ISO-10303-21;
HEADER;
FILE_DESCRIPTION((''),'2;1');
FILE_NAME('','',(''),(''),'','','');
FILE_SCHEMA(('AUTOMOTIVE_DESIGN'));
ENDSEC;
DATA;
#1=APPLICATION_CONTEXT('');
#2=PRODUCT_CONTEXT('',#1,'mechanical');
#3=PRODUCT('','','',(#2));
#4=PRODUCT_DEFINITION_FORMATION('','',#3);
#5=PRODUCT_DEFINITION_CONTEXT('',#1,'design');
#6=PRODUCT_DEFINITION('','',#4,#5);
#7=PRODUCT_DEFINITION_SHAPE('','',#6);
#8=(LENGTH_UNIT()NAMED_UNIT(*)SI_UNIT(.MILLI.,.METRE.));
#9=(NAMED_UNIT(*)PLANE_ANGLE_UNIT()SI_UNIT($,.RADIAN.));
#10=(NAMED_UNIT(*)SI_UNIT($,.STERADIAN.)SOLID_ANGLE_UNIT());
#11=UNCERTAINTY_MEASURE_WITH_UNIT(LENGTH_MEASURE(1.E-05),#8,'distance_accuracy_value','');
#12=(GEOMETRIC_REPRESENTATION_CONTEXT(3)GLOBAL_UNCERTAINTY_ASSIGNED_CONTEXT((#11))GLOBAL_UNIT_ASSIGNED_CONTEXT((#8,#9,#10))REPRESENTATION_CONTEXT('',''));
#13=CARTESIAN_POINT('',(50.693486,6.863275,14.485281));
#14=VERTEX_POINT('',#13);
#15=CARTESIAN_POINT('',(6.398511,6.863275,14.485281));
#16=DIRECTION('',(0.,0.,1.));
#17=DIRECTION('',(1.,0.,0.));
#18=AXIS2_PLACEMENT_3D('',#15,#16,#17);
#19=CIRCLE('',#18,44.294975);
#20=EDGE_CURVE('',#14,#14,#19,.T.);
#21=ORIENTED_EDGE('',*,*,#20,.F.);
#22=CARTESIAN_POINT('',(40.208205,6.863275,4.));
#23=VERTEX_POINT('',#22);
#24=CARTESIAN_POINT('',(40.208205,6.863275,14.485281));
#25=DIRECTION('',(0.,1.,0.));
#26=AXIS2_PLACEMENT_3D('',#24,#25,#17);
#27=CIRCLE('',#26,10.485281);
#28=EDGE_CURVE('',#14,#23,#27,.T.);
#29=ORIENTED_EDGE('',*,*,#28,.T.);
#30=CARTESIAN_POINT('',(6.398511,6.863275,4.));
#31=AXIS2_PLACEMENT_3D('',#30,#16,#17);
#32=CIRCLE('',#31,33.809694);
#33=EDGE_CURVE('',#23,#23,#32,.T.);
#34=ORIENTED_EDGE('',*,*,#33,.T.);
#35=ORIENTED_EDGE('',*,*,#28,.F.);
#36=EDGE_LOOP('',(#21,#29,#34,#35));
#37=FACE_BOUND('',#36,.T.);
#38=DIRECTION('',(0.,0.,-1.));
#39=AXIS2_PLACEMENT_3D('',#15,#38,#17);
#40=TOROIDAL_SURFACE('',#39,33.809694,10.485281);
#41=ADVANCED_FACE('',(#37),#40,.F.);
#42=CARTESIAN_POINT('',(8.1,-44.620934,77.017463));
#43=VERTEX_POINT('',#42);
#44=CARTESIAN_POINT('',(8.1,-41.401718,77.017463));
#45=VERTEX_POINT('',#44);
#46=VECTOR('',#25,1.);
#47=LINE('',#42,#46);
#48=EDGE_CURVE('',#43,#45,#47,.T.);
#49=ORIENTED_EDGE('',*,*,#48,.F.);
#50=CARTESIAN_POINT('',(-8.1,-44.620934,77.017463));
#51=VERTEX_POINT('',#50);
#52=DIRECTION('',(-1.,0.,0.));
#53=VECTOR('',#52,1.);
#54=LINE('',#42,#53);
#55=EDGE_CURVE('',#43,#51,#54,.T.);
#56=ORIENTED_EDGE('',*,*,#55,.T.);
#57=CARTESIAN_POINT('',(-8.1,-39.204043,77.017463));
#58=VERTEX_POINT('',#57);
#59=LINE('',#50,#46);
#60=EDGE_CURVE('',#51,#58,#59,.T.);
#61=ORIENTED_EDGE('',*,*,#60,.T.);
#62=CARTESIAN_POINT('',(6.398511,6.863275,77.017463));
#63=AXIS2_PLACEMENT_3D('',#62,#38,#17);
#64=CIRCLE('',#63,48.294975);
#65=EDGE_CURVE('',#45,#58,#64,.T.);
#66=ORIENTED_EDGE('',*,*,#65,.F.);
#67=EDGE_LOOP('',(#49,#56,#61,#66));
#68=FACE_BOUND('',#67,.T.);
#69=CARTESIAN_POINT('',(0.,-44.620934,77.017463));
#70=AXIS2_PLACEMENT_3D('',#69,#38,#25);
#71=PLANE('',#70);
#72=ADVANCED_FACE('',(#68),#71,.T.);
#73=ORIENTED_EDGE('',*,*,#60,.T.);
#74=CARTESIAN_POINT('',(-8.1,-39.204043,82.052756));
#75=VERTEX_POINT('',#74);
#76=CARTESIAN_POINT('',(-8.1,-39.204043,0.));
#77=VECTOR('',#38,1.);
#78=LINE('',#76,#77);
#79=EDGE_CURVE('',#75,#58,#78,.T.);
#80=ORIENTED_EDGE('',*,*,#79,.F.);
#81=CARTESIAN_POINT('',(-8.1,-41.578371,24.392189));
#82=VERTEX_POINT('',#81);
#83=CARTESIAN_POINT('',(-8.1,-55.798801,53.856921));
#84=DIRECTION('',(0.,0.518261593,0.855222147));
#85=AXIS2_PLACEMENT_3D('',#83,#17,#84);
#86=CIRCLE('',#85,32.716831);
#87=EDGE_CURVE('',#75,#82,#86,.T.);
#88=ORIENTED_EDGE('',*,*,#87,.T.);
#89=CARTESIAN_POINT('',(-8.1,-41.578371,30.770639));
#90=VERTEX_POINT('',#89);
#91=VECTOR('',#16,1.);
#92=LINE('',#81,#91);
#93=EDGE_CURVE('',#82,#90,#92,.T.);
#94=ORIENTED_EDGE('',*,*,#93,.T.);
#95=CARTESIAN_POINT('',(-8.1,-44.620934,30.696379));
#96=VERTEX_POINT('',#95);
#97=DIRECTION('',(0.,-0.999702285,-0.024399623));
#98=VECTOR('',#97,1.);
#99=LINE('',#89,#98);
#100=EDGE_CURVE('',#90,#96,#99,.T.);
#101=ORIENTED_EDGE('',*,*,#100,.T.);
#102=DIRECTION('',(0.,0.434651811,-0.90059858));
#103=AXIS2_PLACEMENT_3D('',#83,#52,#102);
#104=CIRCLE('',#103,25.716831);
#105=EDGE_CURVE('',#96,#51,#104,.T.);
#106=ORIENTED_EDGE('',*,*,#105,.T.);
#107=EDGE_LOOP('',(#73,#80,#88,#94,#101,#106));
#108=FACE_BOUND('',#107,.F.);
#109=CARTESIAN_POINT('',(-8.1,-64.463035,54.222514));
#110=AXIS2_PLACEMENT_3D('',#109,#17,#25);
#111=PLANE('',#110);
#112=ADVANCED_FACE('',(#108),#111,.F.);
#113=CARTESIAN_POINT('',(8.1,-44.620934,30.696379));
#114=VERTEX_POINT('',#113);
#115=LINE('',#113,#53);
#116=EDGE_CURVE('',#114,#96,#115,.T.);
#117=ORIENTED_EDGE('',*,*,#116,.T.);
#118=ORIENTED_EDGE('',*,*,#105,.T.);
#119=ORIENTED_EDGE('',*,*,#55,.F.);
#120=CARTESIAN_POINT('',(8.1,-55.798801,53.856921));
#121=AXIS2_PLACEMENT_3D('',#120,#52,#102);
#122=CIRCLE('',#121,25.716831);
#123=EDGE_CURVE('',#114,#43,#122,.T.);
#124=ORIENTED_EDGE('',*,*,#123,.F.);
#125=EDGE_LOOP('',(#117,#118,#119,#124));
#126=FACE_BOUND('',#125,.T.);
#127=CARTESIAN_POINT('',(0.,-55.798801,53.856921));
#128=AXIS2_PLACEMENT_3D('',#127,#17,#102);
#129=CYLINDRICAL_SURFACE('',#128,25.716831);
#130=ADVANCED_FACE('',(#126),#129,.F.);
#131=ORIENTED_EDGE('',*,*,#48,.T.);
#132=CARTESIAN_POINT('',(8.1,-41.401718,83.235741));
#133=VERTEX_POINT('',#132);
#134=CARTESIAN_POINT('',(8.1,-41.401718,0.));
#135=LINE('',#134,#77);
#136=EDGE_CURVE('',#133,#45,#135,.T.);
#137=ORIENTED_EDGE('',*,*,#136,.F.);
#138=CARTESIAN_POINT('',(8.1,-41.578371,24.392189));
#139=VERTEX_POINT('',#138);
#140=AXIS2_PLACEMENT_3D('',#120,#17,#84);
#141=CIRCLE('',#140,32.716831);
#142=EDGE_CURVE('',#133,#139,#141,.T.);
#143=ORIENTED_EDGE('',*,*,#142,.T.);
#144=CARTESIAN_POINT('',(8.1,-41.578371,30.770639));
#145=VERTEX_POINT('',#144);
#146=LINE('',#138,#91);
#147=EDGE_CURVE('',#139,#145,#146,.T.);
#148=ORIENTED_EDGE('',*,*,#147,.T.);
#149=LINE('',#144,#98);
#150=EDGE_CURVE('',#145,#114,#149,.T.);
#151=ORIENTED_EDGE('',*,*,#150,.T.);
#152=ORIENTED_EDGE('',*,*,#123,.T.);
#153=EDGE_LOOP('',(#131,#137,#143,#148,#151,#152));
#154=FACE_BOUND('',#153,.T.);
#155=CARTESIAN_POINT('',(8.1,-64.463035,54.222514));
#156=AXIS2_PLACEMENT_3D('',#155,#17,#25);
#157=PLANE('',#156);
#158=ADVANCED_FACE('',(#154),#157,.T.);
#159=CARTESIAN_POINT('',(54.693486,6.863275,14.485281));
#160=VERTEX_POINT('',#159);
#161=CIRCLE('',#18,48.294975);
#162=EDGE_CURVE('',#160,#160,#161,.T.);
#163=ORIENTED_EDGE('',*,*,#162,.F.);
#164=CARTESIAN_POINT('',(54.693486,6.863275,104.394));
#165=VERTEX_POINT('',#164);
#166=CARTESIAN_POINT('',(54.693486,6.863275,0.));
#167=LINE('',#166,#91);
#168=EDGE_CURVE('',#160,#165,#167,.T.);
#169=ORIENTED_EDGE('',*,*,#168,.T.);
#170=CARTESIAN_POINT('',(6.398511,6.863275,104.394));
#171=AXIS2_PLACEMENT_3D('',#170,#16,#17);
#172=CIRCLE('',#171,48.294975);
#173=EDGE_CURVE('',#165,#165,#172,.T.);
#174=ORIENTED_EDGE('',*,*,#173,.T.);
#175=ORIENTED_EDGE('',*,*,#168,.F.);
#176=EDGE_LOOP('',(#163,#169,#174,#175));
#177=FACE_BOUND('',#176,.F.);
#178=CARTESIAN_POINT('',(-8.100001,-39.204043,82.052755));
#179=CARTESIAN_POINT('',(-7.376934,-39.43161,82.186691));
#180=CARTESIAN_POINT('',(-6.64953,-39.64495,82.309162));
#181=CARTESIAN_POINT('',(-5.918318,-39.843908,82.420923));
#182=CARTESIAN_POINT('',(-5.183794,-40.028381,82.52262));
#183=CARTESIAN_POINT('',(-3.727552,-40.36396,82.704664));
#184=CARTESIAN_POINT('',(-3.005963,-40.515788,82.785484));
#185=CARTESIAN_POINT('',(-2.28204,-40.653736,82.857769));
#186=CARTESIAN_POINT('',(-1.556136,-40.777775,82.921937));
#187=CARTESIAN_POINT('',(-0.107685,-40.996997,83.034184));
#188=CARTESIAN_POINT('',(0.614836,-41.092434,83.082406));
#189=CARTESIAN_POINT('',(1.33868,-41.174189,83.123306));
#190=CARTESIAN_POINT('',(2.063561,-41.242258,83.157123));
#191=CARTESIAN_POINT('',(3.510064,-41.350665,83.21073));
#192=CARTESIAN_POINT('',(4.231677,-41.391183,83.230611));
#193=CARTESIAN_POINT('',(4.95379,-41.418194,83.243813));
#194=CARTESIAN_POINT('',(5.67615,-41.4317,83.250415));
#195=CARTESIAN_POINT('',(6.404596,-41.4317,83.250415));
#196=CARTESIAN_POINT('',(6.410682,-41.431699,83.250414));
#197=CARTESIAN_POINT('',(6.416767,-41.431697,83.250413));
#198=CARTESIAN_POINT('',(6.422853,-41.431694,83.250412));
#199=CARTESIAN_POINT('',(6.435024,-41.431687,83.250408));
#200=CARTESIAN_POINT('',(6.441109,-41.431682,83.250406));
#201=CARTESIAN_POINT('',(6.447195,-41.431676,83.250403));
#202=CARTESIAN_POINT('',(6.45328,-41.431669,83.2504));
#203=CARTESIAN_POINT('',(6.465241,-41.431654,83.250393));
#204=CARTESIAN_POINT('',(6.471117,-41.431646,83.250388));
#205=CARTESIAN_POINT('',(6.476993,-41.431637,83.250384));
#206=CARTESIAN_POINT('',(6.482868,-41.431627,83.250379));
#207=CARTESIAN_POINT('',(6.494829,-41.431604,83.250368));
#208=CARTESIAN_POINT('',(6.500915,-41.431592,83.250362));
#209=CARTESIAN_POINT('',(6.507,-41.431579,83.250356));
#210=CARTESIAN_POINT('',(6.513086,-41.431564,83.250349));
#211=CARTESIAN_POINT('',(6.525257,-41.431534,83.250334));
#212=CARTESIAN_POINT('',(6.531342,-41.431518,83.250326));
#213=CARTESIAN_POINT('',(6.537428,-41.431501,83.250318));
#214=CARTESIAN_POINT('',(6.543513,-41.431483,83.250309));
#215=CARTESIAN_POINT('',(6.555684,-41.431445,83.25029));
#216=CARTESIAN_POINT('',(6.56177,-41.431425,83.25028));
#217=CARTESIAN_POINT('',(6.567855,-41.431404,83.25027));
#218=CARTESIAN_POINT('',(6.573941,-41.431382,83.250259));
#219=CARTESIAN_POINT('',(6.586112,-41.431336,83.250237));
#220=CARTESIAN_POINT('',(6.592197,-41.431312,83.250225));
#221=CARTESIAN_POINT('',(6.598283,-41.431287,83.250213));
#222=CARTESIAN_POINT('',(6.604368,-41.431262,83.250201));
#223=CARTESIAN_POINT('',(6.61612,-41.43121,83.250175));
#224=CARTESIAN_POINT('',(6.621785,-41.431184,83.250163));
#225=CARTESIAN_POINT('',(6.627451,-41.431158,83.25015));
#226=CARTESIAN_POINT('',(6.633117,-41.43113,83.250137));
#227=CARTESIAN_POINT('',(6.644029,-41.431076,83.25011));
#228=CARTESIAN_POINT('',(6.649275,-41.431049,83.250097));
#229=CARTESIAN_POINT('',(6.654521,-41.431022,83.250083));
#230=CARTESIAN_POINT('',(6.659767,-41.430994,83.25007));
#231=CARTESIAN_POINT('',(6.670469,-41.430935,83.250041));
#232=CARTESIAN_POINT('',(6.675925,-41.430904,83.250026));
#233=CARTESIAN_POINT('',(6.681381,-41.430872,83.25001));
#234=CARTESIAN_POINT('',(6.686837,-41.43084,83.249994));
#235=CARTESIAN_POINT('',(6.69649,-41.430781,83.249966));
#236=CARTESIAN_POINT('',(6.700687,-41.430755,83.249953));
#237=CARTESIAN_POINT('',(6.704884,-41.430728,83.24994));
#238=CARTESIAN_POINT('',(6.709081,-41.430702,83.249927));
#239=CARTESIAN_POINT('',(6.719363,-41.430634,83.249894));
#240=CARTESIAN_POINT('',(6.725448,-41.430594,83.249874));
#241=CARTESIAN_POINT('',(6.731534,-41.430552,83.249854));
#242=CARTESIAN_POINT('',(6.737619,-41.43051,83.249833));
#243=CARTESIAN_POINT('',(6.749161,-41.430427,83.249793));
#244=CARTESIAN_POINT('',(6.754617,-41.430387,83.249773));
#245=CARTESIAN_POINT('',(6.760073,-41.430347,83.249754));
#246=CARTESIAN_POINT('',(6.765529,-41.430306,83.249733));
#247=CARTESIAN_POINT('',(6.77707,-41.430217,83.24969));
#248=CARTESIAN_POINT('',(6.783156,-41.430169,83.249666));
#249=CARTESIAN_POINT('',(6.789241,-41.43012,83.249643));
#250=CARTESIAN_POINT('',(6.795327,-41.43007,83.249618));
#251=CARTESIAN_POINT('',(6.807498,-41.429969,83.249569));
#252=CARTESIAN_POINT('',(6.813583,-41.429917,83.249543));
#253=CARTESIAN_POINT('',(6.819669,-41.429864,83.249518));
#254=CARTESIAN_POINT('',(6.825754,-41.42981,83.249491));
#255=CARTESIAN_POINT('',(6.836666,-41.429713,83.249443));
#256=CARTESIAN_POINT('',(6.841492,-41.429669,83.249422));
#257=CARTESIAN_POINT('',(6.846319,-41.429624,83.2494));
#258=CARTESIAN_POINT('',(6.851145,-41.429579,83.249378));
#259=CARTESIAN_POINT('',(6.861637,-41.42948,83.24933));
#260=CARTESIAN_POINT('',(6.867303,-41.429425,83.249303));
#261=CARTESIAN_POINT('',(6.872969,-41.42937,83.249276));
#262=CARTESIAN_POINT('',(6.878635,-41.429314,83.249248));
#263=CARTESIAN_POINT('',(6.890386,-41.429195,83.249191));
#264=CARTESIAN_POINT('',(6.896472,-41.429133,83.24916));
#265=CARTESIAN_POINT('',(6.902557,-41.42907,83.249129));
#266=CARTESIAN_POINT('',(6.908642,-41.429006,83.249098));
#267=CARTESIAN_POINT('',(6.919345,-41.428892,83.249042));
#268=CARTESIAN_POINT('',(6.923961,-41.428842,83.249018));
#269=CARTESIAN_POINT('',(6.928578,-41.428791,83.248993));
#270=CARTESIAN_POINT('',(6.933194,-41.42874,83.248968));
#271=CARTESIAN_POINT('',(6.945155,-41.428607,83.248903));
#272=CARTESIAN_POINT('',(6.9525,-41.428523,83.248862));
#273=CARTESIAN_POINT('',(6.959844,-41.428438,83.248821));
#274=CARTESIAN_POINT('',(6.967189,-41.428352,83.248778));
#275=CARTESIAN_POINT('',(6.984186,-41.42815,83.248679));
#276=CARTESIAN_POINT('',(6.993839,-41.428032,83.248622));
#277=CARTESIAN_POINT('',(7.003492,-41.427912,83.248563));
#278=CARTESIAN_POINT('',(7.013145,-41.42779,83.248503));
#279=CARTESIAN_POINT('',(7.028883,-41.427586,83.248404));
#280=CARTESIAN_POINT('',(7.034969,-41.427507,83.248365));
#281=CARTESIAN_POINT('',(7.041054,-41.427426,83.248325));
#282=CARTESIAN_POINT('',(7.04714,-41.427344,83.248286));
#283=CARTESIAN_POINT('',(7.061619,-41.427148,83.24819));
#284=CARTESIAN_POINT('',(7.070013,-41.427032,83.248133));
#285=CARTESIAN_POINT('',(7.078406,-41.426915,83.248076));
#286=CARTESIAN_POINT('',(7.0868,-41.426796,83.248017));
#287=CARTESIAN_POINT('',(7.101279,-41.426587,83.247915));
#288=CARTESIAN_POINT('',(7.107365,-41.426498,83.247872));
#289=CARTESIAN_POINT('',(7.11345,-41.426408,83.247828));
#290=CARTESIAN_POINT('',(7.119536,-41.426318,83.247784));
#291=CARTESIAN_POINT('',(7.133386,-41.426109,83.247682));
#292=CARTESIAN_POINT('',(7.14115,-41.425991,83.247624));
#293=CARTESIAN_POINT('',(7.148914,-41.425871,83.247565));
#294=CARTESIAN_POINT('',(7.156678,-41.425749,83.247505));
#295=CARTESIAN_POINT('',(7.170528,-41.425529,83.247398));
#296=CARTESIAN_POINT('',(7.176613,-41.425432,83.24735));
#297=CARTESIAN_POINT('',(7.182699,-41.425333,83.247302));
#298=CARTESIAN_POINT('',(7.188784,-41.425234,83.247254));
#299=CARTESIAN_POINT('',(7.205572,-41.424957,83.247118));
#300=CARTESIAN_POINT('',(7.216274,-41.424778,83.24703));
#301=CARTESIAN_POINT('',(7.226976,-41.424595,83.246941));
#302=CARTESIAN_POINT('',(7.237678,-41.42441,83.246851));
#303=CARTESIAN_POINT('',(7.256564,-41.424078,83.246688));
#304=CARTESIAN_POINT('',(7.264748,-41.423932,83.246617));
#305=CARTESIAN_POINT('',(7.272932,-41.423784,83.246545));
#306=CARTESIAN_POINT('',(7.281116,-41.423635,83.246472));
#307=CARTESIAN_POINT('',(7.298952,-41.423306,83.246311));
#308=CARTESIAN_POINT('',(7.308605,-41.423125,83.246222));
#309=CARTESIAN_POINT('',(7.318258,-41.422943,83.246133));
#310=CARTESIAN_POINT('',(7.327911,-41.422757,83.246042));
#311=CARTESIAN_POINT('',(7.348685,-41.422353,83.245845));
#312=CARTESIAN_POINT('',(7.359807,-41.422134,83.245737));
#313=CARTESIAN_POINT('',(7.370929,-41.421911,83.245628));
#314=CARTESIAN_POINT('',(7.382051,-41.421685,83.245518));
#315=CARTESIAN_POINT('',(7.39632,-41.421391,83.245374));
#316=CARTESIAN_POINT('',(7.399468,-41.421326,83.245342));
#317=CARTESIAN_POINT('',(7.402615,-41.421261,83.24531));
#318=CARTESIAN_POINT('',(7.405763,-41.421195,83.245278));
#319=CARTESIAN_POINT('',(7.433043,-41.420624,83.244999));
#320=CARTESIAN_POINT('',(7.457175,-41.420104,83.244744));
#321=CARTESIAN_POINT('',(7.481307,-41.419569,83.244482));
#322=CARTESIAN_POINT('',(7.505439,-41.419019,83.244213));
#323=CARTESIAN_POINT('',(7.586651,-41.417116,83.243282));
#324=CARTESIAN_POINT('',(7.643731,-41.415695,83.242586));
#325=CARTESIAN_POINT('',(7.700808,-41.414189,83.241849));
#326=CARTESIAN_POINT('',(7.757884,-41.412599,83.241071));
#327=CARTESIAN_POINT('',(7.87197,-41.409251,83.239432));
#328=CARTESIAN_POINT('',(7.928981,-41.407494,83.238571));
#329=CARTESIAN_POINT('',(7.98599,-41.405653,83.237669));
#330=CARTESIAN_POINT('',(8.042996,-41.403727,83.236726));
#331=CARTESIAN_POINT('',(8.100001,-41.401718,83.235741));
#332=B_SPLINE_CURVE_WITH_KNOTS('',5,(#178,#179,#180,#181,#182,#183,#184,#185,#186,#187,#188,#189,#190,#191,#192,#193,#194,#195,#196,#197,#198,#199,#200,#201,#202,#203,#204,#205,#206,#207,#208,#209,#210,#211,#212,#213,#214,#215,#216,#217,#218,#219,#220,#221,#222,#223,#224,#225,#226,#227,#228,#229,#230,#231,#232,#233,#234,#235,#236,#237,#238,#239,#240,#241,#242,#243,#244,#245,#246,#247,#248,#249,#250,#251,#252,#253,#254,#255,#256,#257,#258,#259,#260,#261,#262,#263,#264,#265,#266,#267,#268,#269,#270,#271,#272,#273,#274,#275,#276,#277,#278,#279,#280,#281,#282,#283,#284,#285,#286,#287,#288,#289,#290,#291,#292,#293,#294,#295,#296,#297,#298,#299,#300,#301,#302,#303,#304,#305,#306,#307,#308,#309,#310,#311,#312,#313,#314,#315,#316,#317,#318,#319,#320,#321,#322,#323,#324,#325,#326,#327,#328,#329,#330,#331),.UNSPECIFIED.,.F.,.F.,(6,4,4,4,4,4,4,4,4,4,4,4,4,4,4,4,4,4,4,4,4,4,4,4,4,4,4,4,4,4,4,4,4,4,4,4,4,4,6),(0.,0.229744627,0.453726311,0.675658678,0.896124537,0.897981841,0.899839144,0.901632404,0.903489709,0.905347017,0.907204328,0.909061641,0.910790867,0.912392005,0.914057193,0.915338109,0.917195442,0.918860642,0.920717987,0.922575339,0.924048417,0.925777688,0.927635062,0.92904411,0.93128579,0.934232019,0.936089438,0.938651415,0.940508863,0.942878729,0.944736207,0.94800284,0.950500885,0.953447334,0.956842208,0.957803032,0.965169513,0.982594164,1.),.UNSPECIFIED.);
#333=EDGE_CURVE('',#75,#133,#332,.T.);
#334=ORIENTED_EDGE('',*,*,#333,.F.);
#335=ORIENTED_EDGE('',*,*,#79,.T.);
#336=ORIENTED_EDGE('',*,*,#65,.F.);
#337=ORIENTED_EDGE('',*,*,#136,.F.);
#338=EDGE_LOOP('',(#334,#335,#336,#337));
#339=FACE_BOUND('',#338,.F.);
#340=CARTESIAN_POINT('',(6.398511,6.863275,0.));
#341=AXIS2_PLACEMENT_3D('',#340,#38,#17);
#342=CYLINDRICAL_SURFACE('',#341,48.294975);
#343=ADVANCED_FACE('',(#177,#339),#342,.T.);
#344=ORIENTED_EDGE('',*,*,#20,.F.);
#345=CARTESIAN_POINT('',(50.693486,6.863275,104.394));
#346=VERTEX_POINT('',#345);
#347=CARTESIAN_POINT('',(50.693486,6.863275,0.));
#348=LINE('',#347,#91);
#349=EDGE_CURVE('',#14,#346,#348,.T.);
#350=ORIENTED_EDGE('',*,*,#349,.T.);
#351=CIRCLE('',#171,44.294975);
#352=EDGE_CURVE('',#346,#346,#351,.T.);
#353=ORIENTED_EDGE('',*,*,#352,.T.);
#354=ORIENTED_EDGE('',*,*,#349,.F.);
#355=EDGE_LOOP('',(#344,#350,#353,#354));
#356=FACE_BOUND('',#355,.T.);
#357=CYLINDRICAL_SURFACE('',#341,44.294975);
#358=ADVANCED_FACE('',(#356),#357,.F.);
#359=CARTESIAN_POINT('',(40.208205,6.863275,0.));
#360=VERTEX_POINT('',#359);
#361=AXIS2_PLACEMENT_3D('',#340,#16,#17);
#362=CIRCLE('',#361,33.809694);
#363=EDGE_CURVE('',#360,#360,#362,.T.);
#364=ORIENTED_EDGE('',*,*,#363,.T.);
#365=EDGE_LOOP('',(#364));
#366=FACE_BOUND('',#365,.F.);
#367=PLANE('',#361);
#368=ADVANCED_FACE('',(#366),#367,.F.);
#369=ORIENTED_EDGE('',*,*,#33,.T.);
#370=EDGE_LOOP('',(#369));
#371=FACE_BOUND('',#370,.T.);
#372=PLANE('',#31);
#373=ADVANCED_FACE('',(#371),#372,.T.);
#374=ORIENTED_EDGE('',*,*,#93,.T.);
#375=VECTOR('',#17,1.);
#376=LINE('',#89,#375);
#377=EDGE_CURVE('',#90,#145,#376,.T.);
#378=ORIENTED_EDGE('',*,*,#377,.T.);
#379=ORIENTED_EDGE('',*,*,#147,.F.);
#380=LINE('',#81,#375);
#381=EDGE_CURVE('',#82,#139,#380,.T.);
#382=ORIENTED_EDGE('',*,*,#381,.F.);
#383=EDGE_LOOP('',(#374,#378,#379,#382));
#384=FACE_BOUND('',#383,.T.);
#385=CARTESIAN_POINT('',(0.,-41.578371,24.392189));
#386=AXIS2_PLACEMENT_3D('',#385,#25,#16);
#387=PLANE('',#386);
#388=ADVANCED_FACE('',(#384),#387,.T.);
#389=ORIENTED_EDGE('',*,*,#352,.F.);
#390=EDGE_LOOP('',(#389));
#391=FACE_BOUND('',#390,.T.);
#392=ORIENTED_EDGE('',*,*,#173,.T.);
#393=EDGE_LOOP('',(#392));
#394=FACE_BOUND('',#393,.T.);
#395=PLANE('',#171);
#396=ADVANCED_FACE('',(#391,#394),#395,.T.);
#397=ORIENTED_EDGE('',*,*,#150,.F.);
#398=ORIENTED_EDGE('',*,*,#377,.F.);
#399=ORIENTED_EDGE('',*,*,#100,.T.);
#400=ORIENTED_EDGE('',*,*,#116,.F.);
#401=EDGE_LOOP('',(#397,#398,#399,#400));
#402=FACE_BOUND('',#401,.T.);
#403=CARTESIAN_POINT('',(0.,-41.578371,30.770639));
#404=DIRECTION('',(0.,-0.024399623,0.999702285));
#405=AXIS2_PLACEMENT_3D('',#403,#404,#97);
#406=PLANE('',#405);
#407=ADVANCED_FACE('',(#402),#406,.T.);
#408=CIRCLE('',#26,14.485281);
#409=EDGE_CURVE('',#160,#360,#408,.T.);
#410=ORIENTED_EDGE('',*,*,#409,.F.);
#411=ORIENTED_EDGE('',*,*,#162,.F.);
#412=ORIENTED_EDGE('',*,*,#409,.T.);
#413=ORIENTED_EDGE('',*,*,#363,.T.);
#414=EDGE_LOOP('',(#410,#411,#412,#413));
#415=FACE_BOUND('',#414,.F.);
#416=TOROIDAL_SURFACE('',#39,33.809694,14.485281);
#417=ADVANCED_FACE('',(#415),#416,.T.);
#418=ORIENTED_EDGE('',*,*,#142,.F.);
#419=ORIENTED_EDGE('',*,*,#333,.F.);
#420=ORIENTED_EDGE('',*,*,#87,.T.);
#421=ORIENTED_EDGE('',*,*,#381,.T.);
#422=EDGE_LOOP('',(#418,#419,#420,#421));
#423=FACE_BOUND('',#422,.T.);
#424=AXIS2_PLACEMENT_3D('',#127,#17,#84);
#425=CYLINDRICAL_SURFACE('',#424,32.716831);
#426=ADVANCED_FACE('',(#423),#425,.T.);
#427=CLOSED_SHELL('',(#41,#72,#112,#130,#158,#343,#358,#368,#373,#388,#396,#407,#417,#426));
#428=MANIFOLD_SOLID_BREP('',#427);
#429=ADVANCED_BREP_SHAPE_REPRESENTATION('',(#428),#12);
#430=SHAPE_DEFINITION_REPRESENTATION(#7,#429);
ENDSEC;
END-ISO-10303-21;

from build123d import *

# Parameters (mm, degrees)
F0_R     = 48.2949752594
F1_DEPTH = 104.394
F2_R     = 14.4852813742
F3_T     = -4
F6_DEPTH = 8.1


# Not quite as in the source:
# - a feature of the source that left no trace in its solid (it failed there, or was rolled back) is left out


with BuildPart() as f1:
    # F0 (on Top) → F1 (new body)
    with BuildSketch(Plane.XY):
        with Locations((6.398510754, 6.8632753311)):
            Circle(F0_R)
    extrude(amount=F1_DEPTH)

    # F2
    f2_edges = [f1.edges().sort_by_distance(p)[0] for p in [
        (-41.896465, 6.863275, 0),
    ]]
    fillet(f2_edges, radius=F2_R)

    # F3
    f3_openings = [f1.faces().sort_by_distance(p)[0] for p in [
        (6.398511, 6.863275, 104.394),
    ]]
    offset(amount=F3_T, openings=f3_openings)

    # F5 (on Right) → F6 (join, symmetric)
    with BuildSketch(Plane.YZ):
        with BuildLine():
            Line((-38.8429239392, 77.0174632754), (-38.8429239392, 81.8370801914))
            ThreePointArc((-38.8429239392, 81.8370801914), (-88.478602233, 55.4130888204), (-41.5783710778, 24.392189458))
            Line((-41.5783710778, 24.392189458), (-41.5783710778, 30.7706389778))
            Line((-41.5783710778, 30.7706389778), (-44.6209337434, 30.6963794891))
            ThreePointArc((-44.6209337434, 30.6963794891), (-81.5156325698, 53.8569213822), (-44.6209337434, 77.0174632754))
            Line((-44.6209337434, 77.0174632754), (-38.8429239392, 77.0174632754))
        make_face()
    extrude(amount=F6_DEPTH, both=True)


solid = f1.part
